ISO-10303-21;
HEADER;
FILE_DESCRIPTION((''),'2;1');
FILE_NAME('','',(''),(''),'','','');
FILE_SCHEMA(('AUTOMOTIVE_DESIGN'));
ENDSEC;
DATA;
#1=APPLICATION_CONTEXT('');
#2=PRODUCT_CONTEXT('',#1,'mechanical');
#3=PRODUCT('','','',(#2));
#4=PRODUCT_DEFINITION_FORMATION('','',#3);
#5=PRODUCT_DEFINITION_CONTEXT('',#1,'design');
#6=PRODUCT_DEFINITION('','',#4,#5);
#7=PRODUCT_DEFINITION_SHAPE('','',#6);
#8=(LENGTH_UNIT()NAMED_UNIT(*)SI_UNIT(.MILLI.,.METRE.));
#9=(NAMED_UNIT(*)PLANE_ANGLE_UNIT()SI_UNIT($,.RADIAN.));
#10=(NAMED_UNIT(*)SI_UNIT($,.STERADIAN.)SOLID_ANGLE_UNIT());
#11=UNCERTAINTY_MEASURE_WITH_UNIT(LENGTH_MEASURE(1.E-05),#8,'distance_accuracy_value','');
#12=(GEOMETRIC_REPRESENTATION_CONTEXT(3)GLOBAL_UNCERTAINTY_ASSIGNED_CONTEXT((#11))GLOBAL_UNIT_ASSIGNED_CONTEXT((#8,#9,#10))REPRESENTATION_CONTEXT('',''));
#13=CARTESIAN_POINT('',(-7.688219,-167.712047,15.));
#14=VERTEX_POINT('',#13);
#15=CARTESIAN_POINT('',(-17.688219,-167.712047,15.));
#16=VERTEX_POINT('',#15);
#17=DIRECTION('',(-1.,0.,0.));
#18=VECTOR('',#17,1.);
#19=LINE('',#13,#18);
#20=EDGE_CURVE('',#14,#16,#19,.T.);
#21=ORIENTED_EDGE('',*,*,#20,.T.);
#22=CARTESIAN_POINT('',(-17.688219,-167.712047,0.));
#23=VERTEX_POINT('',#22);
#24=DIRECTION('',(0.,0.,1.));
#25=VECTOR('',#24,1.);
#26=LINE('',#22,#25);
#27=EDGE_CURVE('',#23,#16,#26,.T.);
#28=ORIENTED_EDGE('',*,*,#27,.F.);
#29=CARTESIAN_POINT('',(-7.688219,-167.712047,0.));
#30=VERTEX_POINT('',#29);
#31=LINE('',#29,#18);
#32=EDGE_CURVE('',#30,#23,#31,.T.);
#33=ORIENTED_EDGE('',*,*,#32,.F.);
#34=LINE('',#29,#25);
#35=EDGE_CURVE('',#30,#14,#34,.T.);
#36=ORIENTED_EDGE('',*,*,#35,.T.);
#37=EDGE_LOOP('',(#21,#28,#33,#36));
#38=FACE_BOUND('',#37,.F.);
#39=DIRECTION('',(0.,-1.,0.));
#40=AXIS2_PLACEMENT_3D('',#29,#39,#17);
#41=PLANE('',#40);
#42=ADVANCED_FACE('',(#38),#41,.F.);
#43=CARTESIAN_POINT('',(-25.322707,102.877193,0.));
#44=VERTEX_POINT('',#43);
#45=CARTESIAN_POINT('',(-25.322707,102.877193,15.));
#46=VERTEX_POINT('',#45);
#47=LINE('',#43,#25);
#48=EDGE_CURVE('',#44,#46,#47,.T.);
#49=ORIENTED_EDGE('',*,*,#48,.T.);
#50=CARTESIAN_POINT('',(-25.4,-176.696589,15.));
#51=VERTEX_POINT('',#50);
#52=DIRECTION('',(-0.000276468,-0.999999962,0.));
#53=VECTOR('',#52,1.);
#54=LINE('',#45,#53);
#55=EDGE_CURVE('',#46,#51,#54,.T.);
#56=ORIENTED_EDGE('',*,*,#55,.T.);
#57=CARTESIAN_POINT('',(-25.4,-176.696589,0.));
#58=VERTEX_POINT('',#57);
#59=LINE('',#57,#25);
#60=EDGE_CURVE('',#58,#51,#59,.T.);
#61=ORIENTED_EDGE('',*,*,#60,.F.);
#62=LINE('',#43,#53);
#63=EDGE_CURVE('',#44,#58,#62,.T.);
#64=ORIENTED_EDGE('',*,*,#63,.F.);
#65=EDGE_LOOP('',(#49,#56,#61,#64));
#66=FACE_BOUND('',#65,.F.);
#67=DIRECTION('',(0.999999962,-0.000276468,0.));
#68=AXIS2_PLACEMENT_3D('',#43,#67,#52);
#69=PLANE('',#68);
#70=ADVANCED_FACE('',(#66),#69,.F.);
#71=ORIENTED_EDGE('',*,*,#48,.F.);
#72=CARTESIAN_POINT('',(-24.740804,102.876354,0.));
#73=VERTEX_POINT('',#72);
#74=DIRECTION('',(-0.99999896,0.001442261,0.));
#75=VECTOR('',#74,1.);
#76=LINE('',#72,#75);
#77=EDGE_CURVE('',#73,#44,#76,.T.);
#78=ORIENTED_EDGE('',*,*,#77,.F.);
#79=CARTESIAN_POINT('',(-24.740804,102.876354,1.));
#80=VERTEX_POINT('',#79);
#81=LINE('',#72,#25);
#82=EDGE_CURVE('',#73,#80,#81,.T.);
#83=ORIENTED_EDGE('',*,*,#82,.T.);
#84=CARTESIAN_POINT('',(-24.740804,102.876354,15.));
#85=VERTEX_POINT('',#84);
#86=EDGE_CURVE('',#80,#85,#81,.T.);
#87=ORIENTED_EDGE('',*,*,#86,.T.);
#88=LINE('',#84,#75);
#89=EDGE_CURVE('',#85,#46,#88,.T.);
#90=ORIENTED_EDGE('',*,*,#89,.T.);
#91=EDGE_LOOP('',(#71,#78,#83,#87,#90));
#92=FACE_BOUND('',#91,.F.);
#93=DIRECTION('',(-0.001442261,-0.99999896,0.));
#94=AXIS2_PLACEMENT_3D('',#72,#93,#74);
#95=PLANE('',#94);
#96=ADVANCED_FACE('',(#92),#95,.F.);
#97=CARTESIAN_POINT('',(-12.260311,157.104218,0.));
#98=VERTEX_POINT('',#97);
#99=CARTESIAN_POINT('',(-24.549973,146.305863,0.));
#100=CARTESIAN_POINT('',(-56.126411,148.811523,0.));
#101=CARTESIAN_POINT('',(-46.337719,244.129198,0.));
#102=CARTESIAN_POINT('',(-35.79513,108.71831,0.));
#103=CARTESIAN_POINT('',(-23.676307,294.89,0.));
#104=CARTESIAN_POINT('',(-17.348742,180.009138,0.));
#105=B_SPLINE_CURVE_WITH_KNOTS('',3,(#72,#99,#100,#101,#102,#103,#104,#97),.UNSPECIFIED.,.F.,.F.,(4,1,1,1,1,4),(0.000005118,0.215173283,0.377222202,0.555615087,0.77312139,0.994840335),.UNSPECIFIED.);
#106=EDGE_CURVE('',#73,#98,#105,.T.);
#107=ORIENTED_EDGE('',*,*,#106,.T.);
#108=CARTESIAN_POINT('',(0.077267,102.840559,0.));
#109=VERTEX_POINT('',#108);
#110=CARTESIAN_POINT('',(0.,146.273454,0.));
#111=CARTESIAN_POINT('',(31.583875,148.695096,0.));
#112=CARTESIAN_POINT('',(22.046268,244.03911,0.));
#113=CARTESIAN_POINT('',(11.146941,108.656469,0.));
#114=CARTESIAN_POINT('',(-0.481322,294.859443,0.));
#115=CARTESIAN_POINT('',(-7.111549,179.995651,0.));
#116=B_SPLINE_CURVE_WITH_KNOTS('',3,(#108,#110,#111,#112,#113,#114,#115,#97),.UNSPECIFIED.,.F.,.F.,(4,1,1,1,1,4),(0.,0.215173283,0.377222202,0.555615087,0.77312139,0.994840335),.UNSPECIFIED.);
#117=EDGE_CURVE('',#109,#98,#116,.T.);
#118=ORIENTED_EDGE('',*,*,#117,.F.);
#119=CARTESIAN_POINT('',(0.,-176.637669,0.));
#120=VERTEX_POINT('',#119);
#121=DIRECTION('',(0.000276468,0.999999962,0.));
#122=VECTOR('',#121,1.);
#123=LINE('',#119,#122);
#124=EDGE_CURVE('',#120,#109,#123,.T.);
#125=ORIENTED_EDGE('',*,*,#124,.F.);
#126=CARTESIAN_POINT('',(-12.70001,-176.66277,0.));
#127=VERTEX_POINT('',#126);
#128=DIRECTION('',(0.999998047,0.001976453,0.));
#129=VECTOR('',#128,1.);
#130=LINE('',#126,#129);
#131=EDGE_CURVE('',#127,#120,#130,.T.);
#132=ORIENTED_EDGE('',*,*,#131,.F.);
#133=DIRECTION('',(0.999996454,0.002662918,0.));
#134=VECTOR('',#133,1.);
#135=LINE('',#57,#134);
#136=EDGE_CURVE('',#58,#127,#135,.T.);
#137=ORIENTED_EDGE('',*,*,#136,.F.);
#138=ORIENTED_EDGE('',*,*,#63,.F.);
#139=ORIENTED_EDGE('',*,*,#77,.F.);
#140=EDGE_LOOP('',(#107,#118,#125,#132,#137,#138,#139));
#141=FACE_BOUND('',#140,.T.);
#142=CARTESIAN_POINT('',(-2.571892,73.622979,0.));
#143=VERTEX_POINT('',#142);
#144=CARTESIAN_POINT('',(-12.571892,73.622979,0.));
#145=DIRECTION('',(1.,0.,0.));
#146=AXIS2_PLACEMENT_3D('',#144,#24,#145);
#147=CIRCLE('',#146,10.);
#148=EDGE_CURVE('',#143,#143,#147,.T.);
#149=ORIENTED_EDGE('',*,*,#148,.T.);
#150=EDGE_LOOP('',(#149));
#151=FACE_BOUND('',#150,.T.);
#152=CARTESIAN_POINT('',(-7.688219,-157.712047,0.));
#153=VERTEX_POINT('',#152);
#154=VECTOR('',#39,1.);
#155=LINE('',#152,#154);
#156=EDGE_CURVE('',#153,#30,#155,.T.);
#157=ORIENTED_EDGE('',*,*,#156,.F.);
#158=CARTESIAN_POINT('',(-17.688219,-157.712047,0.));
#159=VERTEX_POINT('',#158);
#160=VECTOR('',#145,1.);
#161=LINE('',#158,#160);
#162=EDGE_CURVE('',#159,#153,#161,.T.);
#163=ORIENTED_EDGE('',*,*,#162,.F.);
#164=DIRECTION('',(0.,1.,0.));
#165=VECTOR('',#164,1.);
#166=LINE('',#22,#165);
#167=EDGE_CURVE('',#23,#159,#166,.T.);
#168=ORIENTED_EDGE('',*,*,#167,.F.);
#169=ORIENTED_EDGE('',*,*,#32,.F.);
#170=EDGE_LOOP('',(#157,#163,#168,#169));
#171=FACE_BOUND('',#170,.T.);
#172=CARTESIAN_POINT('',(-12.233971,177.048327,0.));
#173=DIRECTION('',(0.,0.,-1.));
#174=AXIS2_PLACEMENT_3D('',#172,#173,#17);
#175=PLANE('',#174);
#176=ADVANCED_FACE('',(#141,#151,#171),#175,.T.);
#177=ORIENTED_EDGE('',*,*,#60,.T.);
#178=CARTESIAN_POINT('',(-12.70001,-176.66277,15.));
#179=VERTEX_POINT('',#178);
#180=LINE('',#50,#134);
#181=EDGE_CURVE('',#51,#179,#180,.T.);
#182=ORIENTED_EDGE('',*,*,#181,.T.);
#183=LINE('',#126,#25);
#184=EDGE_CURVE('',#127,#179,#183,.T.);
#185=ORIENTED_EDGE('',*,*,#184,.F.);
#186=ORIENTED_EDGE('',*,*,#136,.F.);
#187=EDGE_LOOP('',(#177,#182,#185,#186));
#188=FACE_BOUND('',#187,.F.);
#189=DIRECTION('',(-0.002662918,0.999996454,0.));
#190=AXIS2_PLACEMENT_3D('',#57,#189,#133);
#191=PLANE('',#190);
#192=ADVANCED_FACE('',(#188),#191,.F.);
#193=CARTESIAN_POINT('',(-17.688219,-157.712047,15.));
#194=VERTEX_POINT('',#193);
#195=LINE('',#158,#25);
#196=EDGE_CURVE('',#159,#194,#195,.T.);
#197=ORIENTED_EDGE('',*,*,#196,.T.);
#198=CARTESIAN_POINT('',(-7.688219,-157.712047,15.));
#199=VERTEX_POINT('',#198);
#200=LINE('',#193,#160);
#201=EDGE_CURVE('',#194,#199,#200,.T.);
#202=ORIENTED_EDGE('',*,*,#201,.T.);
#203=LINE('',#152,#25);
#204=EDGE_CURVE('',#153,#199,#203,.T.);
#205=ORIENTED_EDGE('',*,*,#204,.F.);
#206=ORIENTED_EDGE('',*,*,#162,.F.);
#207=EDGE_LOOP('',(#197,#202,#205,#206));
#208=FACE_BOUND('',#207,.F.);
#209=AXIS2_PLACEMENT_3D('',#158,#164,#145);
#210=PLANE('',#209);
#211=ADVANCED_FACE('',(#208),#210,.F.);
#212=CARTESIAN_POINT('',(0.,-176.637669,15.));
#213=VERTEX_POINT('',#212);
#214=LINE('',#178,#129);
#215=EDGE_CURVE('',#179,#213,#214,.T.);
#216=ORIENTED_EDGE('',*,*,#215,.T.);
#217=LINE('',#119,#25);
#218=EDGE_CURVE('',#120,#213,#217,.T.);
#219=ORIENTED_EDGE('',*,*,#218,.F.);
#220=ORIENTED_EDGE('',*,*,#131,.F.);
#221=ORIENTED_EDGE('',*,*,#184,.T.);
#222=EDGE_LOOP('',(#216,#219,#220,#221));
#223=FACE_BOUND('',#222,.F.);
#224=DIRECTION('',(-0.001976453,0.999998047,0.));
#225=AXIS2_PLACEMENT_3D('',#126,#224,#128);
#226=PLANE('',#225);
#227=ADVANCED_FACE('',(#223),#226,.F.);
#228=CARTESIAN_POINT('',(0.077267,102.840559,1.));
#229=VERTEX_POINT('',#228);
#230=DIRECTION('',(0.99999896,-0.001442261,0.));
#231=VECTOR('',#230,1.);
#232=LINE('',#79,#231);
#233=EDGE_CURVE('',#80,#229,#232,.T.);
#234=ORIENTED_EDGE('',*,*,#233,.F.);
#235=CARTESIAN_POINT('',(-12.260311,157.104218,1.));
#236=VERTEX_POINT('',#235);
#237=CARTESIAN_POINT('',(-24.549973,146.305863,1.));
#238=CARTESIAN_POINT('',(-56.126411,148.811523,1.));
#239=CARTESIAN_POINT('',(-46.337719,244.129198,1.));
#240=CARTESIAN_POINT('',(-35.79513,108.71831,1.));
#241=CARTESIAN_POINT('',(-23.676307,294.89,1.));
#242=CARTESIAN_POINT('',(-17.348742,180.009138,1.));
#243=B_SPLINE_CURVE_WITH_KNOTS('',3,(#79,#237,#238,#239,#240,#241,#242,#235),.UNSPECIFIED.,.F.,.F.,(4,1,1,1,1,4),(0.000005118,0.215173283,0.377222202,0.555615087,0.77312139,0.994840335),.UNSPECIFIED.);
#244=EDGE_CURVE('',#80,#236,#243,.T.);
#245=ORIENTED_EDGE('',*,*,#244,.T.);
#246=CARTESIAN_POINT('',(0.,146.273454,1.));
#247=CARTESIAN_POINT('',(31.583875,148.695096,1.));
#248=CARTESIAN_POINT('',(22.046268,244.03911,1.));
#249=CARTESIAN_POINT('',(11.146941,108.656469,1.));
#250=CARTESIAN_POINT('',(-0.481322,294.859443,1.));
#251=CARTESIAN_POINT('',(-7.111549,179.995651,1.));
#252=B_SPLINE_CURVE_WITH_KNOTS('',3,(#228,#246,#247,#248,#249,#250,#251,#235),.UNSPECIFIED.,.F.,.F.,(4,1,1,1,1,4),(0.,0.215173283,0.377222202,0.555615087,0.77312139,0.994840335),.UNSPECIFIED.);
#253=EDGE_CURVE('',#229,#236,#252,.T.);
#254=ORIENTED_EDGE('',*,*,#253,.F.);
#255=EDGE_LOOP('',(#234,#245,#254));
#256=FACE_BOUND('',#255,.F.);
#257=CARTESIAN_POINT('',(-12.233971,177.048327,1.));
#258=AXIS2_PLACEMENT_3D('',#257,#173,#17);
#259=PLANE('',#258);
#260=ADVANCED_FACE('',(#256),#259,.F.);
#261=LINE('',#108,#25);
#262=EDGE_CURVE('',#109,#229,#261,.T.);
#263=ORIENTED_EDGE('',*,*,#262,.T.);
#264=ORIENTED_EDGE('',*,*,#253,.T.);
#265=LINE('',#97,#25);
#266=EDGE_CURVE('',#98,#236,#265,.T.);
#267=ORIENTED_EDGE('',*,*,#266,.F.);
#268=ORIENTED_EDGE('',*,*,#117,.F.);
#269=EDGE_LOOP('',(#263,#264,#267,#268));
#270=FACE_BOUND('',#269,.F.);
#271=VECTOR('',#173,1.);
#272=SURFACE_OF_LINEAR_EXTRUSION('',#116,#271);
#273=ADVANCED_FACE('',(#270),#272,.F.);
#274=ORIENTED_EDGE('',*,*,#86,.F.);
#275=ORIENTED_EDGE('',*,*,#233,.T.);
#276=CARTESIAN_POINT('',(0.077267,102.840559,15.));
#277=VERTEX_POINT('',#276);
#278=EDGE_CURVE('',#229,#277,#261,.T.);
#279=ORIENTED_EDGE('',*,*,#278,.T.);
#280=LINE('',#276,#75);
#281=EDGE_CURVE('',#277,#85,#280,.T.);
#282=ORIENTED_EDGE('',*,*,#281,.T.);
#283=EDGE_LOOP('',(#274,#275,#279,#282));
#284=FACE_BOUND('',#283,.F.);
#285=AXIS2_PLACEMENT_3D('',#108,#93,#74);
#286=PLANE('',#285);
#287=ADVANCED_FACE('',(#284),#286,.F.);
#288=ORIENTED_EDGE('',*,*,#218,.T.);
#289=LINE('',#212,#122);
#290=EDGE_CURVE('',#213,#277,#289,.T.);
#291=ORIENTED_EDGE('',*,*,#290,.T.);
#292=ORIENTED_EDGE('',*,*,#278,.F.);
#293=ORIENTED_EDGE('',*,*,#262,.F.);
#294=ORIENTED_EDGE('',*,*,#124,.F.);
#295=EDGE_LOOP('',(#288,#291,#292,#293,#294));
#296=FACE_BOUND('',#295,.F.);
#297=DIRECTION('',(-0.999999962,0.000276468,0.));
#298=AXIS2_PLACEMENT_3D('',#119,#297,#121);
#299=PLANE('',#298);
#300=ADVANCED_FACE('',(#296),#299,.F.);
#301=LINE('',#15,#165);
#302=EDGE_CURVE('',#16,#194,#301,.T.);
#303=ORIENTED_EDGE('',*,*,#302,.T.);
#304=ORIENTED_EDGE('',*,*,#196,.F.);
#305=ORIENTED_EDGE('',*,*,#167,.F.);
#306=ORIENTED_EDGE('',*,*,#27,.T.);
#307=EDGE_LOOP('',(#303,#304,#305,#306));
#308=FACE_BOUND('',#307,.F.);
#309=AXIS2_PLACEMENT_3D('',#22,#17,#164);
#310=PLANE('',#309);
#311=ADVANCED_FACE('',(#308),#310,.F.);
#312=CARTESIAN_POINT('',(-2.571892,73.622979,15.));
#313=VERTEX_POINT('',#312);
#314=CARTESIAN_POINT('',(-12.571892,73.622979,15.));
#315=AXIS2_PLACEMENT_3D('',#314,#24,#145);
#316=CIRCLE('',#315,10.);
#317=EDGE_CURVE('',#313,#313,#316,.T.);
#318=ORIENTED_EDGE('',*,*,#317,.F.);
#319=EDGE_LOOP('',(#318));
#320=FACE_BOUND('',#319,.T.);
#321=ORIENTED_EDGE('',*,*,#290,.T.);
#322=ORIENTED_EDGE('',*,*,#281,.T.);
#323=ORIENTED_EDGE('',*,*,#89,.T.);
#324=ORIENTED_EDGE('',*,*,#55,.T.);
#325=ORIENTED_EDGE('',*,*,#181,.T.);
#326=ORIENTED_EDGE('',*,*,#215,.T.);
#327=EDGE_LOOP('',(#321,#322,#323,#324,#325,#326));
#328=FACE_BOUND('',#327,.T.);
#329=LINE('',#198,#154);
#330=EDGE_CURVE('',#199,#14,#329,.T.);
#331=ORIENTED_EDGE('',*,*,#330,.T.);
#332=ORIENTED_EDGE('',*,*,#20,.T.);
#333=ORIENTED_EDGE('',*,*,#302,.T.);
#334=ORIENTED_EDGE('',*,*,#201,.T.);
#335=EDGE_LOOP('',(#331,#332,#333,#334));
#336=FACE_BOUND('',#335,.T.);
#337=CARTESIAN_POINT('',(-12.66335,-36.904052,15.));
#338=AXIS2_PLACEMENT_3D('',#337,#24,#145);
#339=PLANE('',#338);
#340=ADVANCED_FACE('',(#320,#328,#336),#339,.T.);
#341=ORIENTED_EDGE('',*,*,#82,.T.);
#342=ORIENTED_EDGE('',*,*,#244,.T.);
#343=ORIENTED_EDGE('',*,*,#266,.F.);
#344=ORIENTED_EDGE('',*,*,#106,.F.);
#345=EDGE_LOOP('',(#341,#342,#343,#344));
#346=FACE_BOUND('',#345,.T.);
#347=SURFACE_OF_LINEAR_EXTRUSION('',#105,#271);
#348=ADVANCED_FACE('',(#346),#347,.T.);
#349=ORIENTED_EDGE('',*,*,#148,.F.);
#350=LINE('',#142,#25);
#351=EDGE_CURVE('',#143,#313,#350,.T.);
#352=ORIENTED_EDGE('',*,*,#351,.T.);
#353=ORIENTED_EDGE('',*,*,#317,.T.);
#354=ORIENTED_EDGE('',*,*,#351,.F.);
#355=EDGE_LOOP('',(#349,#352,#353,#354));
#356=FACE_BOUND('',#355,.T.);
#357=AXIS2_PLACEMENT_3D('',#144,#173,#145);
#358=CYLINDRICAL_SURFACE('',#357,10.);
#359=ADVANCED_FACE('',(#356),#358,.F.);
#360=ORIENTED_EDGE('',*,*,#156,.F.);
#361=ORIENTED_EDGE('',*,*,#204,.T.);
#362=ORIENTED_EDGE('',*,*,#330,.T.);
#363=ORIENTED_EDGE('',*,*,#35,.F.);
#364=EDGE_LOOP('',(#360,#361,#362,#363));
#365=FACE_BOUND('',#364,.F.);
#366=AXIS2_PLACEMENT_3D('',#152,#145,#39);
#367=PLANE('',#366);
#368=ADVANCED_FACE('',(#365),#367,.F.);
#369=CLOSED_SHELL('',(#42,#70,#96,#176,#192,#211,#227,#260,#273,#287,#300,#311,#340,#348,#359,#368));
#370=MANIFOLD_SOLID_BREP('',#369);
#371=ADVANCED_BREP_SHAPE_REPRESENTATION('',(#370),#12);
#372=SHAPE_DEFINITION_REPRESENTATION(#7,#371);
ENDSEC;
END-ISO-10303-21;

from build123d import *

# Parameters (mm, degrees)
F0_R     = 10
F1_DEPTH = 15
F2_DEPTH = 1


# Not quite as in the source:
# - the program builds the solid bodies; features that only make, move or delete a surface that nothing else refers to are left out


with BuildPart() as f1:
    # F0 (on Top) → F1 (new body)
    with BuildSketch(Plane.XY):
        Polygon((-24.7408044073, 102.8763536353), (-25.3227068062, 102.8771928915), (-25.4, -176.6965887547), (-12.7000101117, -176.6627696025), (0, -176.6376685866), (0.0772667763, 102.8405594523), align=None)
        Polygon((-7.6882185823, -167.7120473838), (-12.6882185823, -167.7120473838), (-17.6882185823, -167.7120473838), (-17.6882185823, -157.7120473838), (-7.6882185823, -157.7120473838), align=None, mode=Mode.SUBTRACT)
        with Locations((-12.5718917698, 73.6229792237)):
            Circle(F0_R, mode=Mode.SUBTRACT)
    extrude(amount=F1_DEPTH)

    # F0 (on Top) → F2 (join)
    with BuildSketch(Plane.XY):
        with BuildLine():
            add(Edge.make_bspline(
                [(-24.7408044073, 102.8763536353), (-24.5499731224, 146.3058625973), (-56.1264111013, 148.8115226622), (-46.337718937, 244.1291976069), (-35.7951301844, 108.7183096569), (-23.6763074235, 294.8900000324), (-17.3487418132, 180.0091377711), (-12.2603111545, 157.1042177733)],
                knots=[5.1182e-06, 5.1182e-06, 5.1182e-06, 5.1182e-06, 0.2151732827, 0.3772222016, 0.5556150865, 0.7731213903, 0.9948403354, 0.9948403354, 0.9948403354, 0.9948403354], degree=3))
            Line((-24.7408044073, 102.8763536353), (0.0772667763, 102.8405594523))
            add(Edge.make_bspline(
                [(0.0772667763, 102.8405594523), (0, 146.2734540246), (31.583875119, 148.6950964448), (22.0462684069, 244.039109704), (11.1469408614, 108.6564689703), (-0.4813218442, 294.8594433526), (-7.1115491577, 179.9956514674), (-12.2603111545, 157.1042177733)],
                knots=[0, 0, 0, 0, 0.2151732827, 0.3772222016, 0.5556150865, 0.7731213903, 0.9948403354, 0.9948403354, 0.9948403354, 0.9948403354], degree=3))
        make_face()
    extrude(amount=F2_DEPTH)


solid = f1.part
